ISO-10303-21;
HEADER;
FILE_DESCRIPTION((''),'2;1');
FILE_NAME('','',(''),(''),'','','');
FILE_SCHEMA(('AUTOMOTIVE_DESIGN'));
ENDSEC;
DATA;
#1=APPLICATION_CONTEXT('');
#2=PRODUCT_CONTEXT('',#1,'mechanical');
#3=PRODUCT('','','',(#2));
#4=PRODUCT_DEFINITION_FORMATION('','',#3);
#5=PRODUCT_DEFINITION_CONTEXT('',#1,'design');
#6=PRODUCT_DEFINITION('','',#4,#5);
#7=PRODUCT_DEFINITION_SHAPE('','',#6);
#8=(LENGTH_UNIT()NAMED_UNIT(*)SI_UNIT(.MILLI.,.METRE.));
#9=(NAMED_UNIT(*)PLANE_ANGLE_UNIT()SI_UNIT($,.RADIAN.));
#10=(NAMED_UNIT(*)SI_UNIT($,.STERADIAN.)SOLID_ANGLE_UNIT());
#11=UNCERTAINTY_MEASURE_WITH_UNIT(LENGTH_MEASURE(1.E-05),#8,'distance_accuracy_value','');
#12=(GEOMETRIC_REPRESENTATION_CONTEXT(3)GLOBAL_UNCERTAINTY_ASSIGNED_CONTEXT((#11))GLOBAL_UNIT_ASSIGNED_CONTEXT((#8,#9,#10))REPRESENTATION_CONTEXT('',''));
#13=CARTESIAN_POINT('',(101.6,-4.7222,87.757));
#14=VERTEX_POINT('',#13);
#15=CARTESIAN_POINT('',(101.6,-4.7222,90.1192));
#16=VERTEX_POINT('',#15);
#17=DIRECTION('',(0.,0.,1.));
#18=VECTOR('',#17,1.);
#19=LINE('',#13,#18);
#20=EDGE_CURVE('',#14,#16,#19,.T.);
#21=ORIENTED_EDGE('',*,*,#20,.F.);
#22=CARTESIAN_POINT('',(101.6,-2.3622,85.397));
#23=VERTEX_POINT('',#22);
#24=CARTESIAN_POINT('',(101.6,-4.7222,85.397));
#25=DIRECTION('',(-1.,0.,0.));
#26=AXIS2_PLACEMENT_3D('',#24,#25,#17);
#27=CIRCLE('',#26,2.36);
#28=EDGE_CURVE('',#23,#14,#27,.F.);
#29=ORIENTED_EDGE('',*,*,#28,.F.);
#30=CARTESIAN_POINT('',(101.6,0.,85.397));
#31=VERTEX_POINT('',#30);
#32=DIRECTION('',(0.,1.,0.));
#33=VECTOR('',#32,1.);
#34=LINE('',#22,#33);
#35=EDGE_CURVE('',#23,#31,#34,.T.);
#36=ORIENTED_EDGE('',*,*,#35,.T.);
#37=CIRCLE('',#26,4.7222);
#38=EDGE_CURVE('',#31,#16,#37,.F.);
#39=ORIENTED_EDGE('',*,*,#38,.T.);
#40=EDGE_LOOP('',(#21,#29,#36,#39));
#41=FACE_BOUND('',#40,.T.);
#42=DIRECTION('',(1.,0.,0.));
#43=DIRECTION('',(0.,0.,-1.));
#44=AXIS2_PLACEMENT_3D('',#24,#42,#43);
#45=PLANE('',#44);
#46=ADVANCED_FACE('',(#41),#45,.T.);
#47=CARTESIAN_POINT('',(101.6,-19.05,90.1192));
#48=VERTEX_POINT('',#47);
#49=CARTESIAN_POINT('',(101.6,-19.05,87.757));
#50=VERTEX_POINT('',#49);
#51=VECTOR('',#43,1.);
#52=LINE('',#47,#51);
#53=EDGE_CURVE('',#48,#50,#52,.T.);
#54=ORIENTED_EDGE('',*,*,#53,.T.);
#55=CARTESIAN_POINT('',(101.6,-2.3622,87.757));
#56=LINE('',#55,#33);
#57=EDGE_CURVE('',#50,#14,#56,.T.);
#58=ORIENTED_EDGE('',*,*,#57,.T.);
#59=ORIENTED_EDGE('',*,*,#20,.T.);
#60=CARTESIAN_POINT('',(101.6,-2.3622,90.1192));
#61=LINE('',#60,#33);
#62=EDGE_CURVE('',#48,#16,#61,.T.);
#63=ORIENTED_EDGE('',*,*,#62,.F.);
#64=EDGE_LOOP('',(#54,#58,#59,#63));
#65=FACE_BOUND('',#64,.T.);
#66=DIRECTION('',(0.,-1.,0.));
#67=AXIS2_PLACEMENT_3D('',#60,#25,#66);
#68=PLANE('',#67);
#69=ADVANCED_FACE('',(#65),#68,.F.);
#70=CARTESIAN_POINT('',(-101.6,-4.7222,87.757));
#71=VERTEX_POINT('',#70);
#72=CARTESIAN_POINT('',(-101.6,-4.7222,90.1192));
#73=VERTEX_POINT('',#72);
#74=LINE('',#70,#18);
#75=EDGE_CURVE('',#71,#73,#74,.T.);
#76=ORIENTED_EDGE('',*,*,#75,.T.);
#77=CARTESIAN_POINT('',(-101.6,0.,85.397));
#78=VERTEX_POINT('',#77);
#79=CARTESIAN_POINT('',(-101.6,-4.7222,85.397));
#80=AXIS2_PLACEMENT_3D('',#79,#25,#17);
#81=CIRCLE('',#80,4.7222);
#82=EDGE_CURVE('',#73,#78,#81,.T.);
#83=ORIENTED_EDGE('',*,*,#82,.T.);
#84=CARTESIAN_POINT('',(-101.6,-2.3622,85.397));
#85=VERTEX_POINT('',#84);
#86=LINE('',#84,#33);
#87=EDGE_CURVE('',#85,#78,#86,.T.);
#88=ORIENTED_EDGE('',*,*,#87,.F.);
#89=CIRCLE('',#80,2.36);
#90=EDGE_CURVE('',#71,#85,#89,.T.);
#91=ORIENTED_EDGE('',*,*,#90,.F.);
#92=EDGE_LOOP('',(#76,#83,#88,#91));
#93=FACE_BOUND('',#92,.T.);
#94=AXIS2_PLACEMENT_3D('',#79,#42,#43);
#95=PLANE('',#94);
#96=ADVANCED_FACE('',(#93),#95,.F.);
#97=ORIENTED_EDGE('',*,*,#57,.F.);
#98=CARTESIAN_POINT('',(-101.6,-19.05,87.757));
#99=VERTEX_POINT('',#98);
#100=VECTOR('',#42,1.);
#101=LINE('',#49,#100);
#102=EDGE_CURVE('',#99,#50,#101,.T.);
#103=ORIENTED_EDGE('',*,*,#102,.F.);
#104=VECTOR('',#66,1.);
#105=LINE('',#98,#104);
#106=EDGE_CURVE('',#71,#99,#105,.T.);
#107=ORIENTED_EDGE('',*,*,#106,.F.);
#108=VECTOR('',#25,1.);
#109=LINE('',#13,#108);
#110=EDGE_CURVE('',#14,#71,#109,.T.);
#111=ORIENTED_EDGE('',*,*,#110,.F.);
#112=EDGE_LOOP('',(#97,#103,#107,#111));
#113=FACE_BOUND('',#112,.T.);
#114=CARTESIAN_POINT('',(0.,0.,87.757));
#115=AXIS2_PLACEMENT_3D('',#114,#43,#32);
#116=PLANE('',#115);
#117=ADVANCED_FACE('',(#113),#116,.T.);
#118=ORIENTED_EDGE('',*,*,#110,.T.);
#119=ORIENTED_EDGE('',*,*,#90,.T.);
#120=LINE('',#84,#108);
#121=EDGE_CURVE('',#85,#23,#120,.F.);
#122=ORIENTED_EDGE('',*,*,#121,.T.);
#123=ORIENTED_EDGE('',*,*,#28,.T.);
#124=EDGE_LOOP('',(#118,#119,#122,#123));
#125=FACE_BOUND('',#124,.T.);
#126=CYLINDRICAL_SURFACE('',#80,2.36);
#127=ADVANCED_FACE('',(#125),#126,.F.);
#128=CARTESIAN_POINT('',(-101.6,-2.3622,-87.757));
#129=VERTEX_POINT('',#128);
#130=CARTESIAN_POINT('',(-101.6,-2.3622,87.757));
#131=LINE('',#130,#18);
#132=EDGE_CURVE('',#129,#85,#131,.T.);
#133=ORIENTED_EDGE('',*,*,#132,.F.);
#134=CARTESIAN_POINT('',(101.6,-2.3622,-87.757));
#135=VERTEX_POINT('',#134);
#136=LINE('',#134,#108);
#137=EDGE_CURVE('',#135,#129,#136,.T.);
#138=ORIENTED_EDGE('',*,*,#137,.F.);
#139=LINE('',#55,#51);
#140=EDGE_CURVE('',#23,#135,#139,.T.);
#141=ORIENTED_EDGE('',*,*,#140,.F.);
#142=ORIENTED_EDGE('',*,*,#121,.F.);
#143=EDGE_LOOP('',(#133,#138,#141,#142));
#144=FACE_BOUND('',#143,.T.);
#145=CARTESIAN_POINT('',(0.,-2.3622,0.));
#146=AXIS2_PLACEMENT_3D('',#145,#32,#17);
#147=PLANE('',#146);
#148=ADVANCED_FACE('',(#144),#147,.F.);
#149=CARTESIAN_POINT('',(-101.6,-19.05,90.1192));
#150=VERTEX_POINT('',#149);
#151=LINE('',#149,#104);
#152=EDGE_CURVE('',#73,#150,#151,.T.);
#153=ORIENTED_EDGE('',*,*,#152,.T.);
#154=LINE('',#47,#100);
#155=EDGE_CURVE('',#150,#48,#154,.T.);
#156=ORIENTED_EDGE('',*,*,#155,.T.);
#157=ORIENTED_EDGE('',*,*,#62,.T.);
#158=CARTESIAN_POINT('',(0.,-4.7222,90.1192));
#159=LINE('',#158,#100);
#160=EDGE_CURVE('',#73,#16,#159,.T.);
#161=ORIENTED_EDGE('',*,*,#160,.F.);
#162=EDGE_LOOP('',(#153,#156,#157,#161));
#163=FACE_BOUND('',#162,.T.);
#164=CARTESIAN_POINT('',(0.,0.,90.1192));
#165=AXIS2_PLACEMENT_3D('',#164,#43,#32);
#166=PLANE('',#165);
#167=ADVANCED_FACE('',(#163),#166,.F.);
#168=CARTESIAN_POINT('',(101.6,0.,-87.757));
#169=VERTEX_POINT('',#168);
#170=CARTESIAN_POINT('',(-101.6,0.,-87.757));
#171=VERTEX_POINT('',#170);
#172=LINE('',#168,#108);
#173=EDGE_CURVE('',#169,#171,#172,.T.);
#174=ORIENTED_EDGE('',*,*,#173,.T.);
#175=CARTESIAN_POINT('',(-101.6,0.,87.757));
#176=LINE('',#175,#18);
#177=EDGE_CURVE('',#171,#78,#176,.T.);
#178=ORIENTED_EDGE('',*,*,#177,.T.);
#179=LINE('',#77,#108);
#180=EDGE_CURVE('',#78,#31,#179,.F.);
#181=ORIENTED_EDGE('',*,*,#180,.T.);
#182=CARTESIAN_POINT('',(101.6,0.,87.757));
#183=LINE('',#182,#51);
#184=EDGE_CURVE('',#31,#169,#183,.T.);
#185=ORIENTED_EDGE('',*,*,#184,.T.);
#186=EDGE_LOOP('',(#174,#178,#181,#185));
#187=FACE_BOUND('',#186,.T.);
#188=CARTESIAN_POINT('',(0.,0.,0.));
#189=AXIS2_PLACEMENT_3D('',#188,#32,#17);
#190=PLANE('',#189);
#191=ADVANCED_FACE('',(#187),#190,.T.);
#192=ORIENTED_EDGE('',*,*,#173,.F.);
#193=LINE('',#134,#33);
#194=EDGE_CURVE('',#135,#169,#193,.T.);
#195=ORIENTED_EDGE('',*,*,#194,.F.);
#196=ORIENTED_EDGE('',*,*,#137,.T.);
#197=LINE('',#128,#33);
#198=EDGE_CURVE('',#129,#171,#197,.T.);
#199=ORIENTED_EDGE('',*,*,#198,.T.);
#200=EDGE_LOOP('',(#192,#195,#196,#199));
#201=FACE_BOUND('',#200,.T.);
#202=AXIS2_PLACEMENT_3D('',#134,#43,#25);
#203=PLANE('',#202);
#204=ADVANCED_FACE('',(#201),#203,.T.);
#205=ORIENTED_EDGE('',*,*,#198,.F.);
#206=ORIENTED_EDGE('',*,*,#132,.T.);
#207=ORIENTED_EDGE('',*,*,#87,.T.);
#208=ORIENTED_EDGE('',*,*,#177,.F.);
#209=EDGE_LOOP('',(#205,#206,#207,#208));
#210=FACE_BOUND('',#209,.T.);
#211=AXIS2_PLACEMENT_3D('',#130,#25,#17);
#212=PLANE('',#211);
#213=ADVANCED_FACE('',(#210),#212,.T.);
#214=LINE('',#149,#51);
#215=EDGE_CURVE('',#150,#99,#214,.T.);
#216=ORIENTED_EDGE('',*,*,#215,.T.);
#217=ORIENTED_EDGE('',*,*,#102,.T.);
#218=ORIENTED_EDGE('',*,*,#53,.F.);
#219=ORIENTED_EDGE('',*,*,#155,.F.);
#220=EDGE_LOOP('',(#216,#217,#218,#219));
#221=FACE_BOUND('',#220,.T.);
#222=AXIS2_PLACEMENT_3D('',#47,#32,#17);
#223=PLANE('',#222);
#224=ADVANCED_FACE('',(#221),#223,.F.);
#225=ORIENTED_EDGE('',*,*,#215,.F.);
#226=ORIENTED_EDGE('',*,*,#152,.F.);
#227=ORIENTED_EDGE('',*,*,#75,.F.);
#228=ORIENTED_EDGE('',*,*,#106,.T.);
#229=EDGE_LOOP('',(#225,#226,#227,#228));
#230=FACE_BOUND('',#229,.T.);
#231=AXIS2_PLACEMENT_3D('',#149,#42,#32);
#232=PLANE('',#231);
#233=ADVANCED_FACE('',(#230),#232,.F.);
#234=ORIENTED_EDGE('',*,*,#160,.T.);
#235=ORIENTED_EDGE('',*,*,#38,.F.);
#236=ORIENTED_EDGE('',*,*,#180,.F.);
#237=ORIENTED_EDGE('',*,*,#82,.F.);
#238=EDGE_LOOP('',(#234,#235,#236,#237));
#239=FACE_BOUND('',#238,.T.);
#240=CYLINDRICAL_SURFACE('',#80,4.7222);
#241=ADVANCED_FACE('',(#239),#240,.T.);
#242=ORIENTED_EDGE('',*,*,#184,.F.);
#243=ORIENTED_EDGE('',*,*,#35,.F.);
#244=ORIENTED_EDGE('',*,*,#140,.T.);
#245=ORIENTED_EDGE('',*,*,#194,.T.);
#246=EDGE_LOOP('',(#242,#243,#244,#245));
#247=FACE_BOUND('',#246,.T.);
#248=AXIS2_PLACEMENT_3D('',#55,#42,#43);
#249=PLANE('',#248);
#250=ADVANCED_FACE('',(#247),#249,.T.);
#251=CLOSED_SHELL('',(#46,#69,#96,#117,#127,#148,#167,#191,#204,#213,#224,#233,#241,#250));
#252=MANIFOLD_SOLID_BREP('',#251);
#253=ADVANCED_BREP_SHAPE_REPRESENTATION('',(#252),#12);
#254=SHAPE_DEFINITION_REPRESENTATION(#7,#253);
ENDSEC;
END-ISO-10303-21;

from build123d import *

# Parameters (mm, degrees)
SKETCH1_W                    = 203.2
SKETCH1_H                    = 175.514
BASE_FLANGE1_DEPTH           = 2.3622
EDGE_FLANGE4_STRIP_W         = 14.1688
EDGE_FLANGE4_STRIP_H         = 2.3622
EDGE_FLANGE4_STRIP_CUT_DEPTH = 203.2
EDGE_FLANGE4_DEPTH           = 203.2


# Sheet-metal steps are written as plain solids
with BuildPart() as part:
    # Sketch1 → Base-Flange1 (new body)
    with BuildSketch(Plane(origin=(0, 0, 0), x_dir=(1, 0, 0), z_dir=(0, 1, 0))):
        Rectangle(SKETCH1_W, SKETCH1_H)
    extrude(amount=-BASE_FLANGE1_DEPTH)

    # Edge-Flange4 strip (across the edge) → Edge-Flange4 strip cut (cut)
    with BuildSketch(Plane(origin=(101.6, -2.3622, 87.757), x_dir=(0, 0, -1), z_dir=(-1, 0, 0))):
        with Locations((-4.7244, -1.1811)):
            Rectangle(EDGE_FLANGE4_STRIP_W, EDGE_FLANGE4_STRIP_H)
    extrude(amount=EDGE_FLANGE4_STRIP_CUT_DEPTH, mode=Mode.SUBTRACT)

    # Edge-Flange4 section (across the edge) → Edge-Flange4 (add)
    with BuildSketch(Plane(origin=(101.6, -2.3622, 87.757), x_dir=(0, 0, -1), z_dir=(-1, 0, 0))):
        with BuildLine():
            Line((-2.3622, 2.36), (-2.3622, 16.6878))
            Line((-2.3622, 16.6878), (0, 16.6878))
            Line((0, 16.6878), (0, 2.36))
            ThreePointArc((0, 2.36), (0.691227996, 0.691227996), (2.36, 0))
            Line((2.36, 0), (2.36, -2.3622))
            ThreePointArc((2.36, -2.3622), (-0.979099642, -0.979099642), (-2.3622, 2.36))
        make_face()
    extrude(amount=EDGE_FLANGE4_DEPTH)


solid = part.part
